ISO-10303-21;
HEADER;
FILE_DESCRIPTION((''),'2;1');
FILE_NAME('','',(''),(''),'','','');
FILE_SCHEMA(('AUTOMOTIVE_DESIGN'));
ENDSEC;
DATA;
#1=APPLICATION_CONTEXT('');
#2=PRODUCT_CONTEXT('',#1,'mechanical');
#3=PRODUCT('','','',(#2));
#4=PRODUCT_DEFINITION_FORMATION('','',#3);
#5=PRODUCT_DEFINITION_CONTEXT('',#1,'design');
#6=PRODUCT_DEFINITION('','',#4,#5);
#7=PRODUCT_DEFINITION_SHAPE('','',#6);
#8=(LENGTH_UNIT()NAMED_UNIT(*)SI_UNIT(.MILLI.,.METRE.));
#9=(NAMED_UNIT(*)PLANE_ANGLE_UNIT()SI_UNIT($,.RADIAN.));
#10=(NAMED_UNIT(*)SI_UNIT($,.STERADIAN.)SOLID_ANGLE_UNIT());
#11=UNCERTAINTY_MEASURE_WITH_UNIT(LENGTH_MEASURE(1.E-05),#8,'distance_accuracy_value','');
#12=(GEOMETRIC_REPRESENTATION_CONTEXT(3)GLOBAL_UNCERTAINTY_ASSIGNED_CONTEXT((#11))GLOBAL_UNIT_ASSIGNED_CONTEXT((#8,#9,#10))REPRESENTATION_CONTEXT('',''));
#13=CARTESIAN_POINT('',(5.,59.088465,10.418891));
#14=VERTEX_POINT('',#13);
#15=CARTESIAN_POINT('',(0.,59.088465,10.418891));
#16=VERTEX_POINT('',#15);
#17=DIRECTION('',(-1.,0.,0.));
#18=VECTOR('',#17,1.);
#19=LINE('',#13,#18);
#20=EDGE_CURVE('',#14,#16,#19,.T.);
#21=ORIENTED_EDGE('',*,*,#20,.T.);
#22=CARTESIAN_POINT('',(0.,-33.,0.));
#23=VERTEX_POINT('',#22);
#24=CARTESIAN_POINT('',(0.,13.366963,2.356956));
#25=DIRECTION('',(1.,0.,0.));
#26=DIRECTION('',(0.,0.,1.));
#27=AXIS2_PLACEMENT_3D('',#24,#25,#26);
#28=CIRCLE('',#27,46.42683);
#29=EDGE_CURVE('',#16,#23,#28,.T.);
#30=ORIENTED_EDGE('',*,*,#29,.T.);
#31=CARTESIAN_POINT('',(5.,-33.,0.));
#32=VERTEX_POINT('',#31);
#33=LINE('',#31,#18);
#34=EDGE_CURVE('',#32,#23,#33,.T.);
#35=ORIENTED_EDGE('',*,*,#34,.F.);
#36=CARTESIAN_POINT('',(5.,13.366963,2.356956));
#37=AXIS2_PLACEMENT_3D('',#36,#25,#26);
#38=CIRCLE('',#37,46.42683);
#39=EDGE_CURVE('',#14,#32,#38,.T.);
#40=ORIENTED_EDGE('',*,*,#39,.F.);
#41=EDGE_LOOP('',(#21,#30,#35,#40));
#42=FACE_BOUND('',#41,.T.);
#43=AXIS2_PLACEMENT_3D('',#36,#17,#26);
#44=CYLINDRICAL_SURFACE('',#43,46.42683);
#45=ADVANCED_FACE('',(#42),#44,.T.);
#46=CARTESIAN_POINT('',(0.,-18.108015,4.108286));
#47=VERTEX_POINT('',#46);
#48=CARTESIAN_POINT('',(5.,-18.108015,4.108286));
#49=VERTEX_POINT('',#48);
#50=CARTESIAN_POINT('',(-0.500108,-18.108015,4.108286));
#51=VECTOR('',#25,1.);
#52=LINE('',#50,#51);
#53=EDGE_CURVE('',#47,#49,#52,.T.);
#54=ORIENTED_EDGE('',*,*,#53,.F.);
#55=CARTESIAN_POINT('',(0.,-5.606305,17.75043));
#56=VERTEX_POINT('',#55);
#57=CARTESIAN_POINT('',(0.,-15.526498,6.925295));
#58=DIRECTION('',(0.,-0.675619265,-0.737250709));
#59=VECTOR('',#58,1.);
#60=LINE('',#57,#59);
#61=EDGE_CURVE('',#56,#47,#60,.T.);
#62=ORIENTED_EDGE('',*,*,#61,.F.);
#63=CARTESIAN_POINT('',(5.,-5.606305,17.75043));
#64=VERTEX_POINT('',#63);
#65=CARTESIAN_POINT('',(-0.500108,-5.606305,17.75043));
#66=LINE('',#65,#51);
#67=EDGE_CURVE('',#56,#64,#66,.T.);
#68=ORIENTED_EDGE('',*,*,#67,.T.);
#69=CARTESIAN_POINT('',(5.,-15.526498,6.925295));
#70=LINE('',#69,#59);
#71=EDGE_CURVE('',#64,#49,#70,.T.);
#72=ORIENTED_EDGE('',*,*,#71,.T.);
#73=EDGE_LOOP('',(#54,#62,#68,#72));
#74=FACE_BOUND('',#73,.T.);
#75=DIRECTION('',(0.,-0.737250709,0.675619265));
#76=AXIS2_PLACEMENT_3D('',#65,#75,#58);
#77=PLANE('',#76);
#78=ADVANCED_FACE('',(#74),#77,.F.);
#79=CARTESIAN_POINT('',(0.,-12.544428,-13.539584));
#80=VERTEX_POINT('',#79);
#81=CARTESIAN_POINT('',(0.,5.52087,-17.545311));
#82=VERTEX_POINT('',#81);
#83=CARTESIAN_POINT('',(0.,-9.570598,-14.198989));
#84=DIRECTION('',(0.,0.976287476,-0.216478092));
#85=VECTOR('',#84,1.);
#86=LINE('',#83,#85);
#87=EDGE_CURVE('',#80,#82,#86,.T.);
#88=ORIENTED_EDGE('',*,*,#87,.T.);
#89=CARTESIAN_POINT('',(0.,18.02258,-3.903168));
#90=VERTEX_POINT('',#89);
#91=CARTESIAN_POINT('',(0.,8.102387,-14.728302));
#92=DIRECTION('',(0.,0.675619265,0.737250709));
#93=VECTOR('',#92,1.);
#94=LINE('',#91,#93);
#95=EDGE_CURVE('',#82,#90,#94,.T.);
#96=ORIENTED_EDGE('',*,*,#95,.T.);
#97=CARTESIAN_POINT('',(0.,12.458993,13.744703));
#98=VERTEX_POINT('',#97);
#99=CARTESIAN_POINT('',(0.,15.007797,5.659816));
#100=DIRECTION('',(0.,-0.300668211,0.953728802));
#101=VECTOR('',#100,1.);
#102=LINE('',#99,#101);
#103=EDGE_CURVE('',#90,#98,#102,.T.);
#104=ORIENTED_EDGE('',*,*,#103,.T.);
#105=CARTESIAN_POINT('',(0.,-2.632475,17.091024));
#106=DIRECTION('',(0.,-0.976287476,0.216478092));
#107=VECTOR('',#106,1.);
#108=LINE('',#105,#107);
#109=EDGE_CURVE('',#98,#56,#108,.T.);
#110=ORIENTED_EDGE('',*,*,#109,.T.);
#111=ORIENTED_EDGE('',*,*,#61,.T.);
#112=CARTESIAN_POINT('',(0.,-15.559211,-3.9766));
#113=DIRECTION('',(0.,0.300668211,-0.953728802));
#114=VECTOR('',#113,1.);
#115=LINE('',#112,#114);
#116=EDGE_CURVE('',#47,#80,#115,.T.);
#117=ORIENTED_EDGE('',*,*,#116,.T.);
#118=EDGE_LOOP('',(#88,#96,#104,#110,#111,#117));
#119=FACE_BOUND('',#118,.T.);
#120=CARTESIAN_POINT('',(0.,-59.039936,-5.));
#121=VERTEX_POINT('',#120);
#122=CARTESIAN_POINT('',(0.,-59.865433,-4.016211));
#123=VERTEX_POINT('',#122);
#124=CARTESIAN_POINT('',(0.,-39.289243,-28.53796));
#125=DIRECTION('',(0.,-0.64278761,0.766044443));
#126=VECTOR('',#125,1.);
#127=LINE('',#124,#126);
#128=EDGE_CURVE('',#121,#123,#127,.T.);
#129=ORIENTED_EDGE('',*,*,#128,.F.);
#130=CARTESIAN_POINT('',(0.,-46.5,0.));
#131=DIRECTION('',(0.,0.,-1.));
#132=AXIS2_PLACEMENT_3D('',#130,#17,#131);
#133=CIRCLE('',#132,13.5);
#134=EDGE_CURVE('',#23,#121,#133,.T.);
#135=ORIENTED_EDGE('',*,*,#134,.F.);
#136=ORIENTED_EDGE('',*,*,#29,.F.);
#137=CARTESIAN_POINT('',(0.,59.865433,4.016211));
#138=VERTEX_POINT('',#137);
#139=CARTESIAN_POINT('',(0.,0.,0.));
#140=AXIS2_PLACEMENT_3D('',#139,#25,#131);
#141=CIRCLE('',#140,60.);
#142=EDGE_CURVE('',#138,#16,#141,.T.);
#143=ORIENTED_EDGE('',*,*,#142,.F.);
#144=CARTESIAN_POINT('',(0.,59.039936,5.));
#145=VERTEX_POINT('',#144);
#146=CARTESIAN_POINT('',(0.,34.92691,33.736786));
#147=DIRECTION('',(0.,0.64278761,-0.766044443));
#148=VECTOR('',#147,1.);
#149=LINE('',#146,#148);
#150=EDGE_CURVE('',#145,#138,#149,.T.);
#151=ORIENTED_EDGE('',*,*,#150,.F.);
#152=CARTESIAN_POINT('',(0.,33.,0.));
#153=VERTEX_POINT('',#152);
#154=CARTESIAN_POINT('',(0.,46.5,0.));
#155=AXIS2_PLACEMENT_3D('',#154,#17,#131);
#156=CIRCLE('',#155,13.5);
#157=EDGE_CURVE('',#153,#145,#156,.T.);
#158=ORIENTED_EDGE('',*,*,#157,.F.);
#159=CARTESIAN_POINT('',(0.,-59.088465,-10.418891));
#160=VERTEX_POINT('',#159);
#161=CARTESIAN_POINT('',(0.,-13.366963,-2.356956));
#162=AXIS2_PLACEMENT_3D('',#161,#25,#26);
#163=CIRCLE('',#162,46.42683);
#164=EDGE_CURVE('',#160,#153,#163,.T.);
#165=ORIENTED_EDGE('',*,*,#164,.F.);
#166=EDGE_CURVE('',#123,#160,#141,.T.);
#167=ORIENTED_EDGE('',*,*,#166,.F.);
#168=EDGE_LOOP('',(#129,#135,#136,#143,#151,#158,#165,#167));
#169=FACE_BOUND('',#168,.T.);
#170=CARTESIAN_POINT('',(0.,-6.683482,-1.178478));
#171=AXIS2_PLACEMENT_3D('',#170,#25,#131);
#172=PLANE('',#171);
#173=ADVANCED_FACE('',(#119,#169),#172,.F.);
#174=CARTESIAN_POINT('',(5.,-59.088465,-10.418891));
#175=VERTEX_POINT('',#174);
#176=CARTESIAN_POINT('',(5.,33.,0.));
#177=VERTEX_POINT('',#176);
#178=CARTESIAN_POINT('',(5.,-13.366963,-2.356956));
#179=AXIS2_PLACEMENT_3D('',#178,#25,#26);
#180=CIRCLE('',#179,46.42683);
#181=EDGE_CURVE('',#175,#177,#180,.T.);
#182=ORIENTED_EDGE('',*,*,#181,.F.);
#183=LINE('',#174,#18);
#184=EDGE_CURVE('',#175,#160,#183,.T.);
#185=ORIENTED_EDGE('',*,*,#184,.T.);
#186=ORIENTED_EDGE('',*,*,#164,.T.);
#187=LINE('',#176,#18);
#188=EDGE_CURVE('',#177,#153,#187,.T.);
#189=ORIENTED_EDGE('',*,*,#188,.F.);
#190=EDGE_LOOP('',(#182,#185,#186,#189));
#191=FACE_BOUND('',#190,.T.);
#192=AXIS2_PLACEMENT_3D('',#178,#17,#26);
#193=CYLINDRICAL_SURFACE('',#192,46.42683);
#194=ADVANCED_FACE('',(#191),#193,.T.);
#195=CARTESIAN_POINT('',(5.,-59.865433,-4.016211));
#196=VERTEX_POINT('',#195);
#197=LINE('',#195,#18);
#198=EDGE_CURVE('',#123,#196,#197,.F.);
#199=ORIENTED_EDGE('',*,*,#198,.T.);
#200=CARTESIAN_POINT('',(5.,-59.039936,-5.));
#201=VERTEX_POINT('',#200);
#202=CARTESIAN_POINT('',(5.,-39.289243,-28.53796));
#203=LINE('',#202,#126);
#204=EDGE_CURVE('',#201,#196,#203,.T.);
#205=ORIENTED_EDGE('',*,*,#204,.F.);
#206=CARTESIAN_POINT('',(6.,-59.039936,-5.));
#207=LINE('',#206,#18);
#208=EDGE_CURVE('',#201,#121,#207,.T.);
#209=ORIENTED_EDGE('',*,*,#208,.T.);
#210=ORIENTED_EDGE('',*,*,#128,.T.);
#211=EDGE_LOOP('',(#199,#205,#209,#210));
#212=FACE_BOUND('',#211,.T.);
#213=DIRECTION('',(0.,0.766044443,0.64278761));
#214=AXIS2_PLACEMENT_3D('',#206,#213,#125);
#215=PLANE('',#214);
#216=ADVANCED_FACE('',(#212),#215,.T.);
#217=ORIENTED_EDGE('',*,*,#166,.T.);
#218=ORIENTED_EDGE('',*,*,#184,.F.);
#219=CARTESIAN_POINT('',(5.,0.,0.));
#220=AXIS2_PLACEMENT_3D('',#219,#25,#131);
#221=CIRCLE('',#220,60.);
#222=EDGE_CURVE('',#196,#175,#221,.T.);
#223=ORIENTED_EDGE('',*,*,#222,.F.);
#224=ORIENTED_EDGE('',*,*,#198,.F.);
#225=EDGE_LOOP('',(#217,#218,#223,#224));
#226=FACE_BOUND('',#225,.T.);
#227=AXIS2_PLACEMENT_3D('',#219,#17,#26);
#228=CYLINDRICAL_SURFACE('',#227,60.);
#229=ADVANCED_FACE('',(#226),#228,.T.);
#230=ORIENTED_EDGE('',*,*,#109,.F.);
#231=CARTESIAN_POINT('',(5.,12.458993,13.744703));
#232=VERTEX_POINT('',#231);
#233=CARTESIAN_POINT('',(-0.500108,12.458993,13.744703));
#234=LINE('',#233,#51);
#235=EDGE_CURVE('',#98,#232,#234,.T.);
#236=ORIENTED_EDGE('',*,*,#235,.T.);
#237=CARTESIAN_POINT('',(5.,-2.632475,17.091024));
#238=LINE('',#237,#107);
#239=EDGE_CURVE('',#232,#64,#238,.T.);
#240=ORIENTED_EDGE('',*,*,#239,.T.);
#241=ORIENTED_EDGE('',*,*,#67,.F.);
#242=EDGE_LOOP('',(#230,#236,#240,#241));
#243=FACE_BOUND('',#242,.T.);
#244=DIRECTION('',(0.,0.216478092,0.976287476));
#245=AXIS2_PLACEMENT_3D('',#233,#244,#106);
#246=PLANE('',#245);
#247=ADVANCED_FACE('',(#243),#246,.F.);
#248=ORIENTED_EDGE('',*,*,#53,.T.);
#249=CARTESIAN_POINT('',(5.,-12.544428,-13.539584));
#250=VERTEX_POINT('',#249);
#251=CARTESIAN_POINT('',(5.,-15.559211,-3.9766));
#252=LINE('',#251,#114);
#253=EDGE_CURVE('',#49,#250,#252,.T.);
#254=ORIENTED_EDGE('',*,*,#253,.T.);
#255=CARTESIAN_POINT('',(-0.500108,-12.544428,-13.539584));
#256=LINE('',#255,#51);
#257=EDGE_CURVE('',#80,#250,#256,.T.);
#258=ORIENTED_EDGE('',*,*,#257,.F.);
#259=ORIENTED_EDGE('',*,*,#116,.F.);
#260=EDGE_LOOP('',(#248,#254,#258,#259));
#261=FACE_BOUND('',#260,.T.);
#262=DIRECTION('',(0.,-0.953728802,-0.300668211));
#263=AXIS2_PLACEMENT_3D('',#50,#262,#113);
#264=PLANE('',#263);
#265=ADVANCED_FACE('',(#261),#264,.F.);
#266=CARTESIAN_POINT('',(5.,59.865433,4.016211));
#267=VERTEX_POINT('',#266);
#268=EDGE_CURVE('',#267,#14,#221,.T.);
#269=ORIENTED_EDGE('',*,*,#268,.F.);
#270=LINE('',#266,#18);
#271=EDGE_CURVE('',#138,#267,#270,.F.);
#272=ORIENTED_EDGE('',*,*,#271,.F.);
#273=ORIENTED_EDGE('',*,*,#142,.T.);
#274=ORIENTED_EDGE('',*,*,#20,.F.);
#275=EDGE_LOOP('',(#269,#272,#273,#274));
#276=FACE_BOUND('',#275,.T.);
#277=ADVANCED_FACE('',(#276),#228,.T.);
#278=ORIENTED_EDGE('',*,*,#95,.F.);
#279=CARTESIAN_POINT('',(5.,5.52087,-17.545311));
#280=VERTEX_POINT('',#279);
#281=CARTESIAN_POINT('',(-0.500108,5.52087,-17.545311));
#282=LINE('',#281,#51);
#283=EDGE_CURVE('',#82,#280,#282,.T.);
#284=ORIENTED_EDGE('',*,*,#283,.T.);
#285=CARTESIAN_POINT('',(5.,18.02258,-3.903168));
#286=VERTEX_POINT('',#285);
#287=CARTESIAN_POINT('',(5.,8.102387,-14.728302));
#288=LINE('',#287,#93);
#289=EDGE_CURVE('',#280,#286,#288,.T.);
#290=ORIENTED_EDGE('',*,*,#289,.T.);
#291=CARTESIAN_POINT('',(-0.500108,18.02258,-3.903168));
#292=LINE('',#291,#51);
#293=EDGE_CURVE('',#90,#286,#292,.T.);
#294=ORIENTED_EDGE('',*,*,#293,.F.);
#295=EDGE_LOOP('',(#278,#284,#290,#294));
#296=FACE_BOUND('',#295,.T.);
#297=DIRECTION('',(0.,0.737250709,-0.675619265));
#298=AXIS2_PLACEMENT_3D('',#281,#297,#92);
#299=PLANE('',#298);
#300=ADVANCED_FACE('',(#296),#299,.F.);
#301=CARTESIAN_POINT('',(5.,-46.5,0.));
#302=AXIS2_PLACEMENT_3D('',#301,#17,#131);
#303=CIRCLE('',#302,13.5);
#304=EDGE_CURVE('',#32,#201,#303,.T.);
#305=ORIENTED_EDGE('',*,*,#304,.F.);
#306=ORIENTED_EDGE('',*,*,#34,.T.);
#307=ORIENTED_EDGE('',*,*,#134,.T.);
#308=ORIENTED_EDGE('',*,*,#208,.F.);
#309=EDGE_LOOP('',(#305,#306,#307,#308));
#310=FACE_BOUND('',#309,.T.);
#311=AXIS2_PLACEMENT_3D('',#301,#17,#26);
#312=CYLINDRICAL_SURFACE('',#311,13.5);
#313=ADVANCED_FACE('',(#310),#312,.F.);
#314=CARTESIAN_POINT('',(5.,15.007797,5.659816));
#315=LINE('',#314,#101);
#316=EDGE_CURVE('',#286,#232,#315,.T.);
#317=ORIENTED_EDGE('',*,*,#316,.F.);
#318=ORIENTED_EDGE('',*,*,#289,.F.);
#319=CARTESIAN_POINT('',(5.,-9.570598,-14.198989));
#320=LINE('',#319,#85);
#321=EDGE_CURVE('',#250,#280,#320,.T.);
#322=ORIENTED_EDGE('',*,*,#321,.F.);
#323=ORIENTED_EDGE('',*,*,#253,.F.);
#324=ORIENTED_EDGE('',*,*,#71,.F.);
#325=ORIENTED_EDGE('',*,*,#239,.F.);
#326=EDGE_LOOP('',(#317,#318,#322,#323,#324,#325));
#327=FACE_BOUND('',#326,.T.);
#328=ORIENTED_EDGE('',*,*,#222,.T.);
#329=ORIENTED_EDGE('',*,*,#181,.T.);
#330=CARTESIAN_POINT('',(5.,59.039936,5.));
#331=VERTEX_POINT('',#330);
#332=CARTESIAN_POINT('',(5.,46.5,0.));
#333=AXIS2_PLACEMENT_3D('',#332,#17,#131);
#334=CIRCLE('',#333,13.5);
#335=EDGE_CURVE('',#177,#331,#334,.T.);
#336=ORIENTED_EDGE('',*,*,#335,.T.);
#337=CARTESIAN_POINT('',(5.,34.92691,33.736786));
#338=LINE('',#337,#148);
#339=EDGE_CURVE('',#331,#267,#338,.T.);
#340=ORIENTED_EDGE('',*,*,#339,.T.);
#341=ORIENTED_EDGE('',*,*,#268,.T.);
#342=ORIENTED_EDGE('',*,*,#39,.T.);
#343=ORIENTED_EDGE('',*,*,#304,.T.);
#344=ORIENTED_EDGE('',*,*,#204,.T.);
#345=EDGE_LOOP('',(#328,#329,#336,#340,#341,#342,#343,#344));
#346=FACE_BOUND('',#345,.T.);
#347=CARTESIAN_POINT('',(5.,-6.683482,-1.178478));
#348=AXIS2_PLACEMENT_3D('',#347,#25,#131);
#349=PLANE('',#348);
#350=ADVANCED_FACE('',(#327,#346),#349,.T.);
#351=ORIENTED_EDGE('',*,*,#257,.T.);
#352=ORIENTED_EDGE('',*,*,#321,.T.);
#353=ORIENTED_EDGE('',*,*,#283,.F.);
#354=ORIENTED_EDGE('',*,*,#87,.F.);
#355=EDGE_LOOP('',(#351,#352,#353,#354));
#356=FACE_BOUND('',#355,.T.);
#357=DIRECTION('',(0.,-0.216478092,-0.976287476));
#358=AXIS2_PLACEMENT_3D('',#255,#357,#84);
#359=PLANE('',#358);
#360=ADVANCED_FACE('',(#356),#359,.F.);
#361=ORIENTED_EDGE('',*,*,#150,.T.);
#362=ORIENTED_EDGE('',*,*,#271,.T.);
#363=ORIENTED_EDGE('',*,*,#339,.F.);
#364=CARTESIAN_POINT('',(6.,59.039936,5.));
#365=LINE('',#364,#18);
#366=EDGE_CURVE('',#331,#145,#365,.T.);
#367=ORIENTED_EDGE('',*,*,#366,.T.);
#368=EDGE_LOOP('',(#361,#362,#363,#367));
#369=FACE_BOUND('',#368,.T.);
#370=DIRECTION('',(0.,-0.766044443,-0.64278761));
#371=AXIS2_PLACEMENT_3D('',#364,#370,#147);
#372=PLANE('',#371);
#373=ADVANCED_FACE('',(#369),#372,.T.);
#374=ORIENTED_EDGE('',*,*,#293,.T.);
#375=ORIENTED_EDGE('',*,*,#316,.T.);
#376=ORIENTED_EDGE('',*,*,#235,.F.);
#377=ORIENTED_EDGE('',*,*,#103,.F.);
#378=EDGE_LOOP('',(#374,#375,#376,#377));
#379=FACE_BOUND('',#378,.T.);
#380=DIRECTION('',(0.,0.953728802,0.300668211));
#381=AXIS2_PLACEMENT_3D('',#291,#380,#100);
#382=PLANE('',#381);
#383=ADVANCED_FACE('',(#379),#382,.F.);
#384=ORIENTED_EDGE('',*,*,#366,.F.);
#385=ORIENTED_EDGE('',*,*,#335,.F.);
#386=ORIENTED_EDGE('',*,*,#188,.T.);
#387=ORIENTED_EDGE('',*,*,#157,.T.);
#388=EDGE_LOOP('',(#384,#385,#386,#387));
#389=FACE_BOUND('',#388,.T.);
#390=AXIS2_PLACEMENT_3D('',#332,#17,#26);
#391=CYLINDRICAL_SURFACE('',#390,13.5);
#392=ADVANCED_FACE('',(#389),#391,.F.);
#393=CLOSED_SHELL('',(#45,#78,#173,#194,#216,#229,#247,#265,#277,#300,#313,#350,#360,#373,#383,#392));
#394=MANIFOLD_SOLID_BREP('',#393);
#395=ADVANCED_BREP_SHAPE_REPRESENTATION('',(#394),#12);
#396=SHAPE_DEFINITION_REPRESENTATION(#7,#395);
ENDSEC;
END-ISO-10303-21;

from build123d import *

# Parameters (mm, degrees)
BOSS_EXTRUDE1_DEPTH = 5
CUT_EXTRUDE1_DEPTH  = 6
CAVITY1_DEPTH       = 5


# Read off the part's stored shape, not the designer's step: Cavity1
with BuildPart() as part:
    # Sketch3 → Boss-Extrude1 (new body)
    with BuildSketch(Plane(origin=(0, 0, 0), x_dir=(0, 0, -1), z_dir=(1, 0, 0))):
        with BuildLine():
            ThreePointArc((0, 60), (-13.5, 46.5), (0, 33))
            ThreePointArc((0, 33), (48.489461609, -8.147530745), (10.41889066, -59.088465181))
            ThreePointArc((10.41889066, -59.088465181), (5.229344565, -59.771681886), (0, -60))
            ThreePointArc((0, -60), (13.5, -46.5), (0, -33))
            ThreePointArc((0, -33), (-48.489461609, 8.147530745), (-10.41889066, 59.088465181))
            ThreePointArc((-10.41889066, 59.088465181), (-5.229344565, 59.771681886), (0, 60))
        make_face()
    extrude(amount=BOSS_EXTRUDE1_DEPTH)

    # Sketch5 → Cut-Extrude1 (cut)
    with BuildSketch(Plane(origin=(0, 0, 0), x_dir=(0, 0, -1), z_dir=(1, 0, 0))):
        Polygon((-5, 59.039936204), (0, 63.23543436), (4.195498156, 58.23543436), (-0.804501844, 54.039936204), align=None)
        Polygon((5, -59.039936204), (0, -63.23543436), (-4.195498156, -58.23543436), (0.804501844, -54.039936204), align=None)
    extrude(amount=CUT_EXTRUDE1_DEPTH, mode=Mode.SUBTRACT)

    # Cavity1 outline → Cavity1 (cut)
    with BuildSketch(Plane.YZ):
        Polygon((-18.108015498, 4.108286468), (-12.544428042, -13.539583883), (5.520869734, -17.545310986), (18.022580053, -3.903167737), (12.458992597, 13.744702615), (-5.606305179, 17.750429717), align=None)
    extrude(amount=CAVITY1_DEPTH, mode=Mode.SUBTRACT)


solid = part.part
